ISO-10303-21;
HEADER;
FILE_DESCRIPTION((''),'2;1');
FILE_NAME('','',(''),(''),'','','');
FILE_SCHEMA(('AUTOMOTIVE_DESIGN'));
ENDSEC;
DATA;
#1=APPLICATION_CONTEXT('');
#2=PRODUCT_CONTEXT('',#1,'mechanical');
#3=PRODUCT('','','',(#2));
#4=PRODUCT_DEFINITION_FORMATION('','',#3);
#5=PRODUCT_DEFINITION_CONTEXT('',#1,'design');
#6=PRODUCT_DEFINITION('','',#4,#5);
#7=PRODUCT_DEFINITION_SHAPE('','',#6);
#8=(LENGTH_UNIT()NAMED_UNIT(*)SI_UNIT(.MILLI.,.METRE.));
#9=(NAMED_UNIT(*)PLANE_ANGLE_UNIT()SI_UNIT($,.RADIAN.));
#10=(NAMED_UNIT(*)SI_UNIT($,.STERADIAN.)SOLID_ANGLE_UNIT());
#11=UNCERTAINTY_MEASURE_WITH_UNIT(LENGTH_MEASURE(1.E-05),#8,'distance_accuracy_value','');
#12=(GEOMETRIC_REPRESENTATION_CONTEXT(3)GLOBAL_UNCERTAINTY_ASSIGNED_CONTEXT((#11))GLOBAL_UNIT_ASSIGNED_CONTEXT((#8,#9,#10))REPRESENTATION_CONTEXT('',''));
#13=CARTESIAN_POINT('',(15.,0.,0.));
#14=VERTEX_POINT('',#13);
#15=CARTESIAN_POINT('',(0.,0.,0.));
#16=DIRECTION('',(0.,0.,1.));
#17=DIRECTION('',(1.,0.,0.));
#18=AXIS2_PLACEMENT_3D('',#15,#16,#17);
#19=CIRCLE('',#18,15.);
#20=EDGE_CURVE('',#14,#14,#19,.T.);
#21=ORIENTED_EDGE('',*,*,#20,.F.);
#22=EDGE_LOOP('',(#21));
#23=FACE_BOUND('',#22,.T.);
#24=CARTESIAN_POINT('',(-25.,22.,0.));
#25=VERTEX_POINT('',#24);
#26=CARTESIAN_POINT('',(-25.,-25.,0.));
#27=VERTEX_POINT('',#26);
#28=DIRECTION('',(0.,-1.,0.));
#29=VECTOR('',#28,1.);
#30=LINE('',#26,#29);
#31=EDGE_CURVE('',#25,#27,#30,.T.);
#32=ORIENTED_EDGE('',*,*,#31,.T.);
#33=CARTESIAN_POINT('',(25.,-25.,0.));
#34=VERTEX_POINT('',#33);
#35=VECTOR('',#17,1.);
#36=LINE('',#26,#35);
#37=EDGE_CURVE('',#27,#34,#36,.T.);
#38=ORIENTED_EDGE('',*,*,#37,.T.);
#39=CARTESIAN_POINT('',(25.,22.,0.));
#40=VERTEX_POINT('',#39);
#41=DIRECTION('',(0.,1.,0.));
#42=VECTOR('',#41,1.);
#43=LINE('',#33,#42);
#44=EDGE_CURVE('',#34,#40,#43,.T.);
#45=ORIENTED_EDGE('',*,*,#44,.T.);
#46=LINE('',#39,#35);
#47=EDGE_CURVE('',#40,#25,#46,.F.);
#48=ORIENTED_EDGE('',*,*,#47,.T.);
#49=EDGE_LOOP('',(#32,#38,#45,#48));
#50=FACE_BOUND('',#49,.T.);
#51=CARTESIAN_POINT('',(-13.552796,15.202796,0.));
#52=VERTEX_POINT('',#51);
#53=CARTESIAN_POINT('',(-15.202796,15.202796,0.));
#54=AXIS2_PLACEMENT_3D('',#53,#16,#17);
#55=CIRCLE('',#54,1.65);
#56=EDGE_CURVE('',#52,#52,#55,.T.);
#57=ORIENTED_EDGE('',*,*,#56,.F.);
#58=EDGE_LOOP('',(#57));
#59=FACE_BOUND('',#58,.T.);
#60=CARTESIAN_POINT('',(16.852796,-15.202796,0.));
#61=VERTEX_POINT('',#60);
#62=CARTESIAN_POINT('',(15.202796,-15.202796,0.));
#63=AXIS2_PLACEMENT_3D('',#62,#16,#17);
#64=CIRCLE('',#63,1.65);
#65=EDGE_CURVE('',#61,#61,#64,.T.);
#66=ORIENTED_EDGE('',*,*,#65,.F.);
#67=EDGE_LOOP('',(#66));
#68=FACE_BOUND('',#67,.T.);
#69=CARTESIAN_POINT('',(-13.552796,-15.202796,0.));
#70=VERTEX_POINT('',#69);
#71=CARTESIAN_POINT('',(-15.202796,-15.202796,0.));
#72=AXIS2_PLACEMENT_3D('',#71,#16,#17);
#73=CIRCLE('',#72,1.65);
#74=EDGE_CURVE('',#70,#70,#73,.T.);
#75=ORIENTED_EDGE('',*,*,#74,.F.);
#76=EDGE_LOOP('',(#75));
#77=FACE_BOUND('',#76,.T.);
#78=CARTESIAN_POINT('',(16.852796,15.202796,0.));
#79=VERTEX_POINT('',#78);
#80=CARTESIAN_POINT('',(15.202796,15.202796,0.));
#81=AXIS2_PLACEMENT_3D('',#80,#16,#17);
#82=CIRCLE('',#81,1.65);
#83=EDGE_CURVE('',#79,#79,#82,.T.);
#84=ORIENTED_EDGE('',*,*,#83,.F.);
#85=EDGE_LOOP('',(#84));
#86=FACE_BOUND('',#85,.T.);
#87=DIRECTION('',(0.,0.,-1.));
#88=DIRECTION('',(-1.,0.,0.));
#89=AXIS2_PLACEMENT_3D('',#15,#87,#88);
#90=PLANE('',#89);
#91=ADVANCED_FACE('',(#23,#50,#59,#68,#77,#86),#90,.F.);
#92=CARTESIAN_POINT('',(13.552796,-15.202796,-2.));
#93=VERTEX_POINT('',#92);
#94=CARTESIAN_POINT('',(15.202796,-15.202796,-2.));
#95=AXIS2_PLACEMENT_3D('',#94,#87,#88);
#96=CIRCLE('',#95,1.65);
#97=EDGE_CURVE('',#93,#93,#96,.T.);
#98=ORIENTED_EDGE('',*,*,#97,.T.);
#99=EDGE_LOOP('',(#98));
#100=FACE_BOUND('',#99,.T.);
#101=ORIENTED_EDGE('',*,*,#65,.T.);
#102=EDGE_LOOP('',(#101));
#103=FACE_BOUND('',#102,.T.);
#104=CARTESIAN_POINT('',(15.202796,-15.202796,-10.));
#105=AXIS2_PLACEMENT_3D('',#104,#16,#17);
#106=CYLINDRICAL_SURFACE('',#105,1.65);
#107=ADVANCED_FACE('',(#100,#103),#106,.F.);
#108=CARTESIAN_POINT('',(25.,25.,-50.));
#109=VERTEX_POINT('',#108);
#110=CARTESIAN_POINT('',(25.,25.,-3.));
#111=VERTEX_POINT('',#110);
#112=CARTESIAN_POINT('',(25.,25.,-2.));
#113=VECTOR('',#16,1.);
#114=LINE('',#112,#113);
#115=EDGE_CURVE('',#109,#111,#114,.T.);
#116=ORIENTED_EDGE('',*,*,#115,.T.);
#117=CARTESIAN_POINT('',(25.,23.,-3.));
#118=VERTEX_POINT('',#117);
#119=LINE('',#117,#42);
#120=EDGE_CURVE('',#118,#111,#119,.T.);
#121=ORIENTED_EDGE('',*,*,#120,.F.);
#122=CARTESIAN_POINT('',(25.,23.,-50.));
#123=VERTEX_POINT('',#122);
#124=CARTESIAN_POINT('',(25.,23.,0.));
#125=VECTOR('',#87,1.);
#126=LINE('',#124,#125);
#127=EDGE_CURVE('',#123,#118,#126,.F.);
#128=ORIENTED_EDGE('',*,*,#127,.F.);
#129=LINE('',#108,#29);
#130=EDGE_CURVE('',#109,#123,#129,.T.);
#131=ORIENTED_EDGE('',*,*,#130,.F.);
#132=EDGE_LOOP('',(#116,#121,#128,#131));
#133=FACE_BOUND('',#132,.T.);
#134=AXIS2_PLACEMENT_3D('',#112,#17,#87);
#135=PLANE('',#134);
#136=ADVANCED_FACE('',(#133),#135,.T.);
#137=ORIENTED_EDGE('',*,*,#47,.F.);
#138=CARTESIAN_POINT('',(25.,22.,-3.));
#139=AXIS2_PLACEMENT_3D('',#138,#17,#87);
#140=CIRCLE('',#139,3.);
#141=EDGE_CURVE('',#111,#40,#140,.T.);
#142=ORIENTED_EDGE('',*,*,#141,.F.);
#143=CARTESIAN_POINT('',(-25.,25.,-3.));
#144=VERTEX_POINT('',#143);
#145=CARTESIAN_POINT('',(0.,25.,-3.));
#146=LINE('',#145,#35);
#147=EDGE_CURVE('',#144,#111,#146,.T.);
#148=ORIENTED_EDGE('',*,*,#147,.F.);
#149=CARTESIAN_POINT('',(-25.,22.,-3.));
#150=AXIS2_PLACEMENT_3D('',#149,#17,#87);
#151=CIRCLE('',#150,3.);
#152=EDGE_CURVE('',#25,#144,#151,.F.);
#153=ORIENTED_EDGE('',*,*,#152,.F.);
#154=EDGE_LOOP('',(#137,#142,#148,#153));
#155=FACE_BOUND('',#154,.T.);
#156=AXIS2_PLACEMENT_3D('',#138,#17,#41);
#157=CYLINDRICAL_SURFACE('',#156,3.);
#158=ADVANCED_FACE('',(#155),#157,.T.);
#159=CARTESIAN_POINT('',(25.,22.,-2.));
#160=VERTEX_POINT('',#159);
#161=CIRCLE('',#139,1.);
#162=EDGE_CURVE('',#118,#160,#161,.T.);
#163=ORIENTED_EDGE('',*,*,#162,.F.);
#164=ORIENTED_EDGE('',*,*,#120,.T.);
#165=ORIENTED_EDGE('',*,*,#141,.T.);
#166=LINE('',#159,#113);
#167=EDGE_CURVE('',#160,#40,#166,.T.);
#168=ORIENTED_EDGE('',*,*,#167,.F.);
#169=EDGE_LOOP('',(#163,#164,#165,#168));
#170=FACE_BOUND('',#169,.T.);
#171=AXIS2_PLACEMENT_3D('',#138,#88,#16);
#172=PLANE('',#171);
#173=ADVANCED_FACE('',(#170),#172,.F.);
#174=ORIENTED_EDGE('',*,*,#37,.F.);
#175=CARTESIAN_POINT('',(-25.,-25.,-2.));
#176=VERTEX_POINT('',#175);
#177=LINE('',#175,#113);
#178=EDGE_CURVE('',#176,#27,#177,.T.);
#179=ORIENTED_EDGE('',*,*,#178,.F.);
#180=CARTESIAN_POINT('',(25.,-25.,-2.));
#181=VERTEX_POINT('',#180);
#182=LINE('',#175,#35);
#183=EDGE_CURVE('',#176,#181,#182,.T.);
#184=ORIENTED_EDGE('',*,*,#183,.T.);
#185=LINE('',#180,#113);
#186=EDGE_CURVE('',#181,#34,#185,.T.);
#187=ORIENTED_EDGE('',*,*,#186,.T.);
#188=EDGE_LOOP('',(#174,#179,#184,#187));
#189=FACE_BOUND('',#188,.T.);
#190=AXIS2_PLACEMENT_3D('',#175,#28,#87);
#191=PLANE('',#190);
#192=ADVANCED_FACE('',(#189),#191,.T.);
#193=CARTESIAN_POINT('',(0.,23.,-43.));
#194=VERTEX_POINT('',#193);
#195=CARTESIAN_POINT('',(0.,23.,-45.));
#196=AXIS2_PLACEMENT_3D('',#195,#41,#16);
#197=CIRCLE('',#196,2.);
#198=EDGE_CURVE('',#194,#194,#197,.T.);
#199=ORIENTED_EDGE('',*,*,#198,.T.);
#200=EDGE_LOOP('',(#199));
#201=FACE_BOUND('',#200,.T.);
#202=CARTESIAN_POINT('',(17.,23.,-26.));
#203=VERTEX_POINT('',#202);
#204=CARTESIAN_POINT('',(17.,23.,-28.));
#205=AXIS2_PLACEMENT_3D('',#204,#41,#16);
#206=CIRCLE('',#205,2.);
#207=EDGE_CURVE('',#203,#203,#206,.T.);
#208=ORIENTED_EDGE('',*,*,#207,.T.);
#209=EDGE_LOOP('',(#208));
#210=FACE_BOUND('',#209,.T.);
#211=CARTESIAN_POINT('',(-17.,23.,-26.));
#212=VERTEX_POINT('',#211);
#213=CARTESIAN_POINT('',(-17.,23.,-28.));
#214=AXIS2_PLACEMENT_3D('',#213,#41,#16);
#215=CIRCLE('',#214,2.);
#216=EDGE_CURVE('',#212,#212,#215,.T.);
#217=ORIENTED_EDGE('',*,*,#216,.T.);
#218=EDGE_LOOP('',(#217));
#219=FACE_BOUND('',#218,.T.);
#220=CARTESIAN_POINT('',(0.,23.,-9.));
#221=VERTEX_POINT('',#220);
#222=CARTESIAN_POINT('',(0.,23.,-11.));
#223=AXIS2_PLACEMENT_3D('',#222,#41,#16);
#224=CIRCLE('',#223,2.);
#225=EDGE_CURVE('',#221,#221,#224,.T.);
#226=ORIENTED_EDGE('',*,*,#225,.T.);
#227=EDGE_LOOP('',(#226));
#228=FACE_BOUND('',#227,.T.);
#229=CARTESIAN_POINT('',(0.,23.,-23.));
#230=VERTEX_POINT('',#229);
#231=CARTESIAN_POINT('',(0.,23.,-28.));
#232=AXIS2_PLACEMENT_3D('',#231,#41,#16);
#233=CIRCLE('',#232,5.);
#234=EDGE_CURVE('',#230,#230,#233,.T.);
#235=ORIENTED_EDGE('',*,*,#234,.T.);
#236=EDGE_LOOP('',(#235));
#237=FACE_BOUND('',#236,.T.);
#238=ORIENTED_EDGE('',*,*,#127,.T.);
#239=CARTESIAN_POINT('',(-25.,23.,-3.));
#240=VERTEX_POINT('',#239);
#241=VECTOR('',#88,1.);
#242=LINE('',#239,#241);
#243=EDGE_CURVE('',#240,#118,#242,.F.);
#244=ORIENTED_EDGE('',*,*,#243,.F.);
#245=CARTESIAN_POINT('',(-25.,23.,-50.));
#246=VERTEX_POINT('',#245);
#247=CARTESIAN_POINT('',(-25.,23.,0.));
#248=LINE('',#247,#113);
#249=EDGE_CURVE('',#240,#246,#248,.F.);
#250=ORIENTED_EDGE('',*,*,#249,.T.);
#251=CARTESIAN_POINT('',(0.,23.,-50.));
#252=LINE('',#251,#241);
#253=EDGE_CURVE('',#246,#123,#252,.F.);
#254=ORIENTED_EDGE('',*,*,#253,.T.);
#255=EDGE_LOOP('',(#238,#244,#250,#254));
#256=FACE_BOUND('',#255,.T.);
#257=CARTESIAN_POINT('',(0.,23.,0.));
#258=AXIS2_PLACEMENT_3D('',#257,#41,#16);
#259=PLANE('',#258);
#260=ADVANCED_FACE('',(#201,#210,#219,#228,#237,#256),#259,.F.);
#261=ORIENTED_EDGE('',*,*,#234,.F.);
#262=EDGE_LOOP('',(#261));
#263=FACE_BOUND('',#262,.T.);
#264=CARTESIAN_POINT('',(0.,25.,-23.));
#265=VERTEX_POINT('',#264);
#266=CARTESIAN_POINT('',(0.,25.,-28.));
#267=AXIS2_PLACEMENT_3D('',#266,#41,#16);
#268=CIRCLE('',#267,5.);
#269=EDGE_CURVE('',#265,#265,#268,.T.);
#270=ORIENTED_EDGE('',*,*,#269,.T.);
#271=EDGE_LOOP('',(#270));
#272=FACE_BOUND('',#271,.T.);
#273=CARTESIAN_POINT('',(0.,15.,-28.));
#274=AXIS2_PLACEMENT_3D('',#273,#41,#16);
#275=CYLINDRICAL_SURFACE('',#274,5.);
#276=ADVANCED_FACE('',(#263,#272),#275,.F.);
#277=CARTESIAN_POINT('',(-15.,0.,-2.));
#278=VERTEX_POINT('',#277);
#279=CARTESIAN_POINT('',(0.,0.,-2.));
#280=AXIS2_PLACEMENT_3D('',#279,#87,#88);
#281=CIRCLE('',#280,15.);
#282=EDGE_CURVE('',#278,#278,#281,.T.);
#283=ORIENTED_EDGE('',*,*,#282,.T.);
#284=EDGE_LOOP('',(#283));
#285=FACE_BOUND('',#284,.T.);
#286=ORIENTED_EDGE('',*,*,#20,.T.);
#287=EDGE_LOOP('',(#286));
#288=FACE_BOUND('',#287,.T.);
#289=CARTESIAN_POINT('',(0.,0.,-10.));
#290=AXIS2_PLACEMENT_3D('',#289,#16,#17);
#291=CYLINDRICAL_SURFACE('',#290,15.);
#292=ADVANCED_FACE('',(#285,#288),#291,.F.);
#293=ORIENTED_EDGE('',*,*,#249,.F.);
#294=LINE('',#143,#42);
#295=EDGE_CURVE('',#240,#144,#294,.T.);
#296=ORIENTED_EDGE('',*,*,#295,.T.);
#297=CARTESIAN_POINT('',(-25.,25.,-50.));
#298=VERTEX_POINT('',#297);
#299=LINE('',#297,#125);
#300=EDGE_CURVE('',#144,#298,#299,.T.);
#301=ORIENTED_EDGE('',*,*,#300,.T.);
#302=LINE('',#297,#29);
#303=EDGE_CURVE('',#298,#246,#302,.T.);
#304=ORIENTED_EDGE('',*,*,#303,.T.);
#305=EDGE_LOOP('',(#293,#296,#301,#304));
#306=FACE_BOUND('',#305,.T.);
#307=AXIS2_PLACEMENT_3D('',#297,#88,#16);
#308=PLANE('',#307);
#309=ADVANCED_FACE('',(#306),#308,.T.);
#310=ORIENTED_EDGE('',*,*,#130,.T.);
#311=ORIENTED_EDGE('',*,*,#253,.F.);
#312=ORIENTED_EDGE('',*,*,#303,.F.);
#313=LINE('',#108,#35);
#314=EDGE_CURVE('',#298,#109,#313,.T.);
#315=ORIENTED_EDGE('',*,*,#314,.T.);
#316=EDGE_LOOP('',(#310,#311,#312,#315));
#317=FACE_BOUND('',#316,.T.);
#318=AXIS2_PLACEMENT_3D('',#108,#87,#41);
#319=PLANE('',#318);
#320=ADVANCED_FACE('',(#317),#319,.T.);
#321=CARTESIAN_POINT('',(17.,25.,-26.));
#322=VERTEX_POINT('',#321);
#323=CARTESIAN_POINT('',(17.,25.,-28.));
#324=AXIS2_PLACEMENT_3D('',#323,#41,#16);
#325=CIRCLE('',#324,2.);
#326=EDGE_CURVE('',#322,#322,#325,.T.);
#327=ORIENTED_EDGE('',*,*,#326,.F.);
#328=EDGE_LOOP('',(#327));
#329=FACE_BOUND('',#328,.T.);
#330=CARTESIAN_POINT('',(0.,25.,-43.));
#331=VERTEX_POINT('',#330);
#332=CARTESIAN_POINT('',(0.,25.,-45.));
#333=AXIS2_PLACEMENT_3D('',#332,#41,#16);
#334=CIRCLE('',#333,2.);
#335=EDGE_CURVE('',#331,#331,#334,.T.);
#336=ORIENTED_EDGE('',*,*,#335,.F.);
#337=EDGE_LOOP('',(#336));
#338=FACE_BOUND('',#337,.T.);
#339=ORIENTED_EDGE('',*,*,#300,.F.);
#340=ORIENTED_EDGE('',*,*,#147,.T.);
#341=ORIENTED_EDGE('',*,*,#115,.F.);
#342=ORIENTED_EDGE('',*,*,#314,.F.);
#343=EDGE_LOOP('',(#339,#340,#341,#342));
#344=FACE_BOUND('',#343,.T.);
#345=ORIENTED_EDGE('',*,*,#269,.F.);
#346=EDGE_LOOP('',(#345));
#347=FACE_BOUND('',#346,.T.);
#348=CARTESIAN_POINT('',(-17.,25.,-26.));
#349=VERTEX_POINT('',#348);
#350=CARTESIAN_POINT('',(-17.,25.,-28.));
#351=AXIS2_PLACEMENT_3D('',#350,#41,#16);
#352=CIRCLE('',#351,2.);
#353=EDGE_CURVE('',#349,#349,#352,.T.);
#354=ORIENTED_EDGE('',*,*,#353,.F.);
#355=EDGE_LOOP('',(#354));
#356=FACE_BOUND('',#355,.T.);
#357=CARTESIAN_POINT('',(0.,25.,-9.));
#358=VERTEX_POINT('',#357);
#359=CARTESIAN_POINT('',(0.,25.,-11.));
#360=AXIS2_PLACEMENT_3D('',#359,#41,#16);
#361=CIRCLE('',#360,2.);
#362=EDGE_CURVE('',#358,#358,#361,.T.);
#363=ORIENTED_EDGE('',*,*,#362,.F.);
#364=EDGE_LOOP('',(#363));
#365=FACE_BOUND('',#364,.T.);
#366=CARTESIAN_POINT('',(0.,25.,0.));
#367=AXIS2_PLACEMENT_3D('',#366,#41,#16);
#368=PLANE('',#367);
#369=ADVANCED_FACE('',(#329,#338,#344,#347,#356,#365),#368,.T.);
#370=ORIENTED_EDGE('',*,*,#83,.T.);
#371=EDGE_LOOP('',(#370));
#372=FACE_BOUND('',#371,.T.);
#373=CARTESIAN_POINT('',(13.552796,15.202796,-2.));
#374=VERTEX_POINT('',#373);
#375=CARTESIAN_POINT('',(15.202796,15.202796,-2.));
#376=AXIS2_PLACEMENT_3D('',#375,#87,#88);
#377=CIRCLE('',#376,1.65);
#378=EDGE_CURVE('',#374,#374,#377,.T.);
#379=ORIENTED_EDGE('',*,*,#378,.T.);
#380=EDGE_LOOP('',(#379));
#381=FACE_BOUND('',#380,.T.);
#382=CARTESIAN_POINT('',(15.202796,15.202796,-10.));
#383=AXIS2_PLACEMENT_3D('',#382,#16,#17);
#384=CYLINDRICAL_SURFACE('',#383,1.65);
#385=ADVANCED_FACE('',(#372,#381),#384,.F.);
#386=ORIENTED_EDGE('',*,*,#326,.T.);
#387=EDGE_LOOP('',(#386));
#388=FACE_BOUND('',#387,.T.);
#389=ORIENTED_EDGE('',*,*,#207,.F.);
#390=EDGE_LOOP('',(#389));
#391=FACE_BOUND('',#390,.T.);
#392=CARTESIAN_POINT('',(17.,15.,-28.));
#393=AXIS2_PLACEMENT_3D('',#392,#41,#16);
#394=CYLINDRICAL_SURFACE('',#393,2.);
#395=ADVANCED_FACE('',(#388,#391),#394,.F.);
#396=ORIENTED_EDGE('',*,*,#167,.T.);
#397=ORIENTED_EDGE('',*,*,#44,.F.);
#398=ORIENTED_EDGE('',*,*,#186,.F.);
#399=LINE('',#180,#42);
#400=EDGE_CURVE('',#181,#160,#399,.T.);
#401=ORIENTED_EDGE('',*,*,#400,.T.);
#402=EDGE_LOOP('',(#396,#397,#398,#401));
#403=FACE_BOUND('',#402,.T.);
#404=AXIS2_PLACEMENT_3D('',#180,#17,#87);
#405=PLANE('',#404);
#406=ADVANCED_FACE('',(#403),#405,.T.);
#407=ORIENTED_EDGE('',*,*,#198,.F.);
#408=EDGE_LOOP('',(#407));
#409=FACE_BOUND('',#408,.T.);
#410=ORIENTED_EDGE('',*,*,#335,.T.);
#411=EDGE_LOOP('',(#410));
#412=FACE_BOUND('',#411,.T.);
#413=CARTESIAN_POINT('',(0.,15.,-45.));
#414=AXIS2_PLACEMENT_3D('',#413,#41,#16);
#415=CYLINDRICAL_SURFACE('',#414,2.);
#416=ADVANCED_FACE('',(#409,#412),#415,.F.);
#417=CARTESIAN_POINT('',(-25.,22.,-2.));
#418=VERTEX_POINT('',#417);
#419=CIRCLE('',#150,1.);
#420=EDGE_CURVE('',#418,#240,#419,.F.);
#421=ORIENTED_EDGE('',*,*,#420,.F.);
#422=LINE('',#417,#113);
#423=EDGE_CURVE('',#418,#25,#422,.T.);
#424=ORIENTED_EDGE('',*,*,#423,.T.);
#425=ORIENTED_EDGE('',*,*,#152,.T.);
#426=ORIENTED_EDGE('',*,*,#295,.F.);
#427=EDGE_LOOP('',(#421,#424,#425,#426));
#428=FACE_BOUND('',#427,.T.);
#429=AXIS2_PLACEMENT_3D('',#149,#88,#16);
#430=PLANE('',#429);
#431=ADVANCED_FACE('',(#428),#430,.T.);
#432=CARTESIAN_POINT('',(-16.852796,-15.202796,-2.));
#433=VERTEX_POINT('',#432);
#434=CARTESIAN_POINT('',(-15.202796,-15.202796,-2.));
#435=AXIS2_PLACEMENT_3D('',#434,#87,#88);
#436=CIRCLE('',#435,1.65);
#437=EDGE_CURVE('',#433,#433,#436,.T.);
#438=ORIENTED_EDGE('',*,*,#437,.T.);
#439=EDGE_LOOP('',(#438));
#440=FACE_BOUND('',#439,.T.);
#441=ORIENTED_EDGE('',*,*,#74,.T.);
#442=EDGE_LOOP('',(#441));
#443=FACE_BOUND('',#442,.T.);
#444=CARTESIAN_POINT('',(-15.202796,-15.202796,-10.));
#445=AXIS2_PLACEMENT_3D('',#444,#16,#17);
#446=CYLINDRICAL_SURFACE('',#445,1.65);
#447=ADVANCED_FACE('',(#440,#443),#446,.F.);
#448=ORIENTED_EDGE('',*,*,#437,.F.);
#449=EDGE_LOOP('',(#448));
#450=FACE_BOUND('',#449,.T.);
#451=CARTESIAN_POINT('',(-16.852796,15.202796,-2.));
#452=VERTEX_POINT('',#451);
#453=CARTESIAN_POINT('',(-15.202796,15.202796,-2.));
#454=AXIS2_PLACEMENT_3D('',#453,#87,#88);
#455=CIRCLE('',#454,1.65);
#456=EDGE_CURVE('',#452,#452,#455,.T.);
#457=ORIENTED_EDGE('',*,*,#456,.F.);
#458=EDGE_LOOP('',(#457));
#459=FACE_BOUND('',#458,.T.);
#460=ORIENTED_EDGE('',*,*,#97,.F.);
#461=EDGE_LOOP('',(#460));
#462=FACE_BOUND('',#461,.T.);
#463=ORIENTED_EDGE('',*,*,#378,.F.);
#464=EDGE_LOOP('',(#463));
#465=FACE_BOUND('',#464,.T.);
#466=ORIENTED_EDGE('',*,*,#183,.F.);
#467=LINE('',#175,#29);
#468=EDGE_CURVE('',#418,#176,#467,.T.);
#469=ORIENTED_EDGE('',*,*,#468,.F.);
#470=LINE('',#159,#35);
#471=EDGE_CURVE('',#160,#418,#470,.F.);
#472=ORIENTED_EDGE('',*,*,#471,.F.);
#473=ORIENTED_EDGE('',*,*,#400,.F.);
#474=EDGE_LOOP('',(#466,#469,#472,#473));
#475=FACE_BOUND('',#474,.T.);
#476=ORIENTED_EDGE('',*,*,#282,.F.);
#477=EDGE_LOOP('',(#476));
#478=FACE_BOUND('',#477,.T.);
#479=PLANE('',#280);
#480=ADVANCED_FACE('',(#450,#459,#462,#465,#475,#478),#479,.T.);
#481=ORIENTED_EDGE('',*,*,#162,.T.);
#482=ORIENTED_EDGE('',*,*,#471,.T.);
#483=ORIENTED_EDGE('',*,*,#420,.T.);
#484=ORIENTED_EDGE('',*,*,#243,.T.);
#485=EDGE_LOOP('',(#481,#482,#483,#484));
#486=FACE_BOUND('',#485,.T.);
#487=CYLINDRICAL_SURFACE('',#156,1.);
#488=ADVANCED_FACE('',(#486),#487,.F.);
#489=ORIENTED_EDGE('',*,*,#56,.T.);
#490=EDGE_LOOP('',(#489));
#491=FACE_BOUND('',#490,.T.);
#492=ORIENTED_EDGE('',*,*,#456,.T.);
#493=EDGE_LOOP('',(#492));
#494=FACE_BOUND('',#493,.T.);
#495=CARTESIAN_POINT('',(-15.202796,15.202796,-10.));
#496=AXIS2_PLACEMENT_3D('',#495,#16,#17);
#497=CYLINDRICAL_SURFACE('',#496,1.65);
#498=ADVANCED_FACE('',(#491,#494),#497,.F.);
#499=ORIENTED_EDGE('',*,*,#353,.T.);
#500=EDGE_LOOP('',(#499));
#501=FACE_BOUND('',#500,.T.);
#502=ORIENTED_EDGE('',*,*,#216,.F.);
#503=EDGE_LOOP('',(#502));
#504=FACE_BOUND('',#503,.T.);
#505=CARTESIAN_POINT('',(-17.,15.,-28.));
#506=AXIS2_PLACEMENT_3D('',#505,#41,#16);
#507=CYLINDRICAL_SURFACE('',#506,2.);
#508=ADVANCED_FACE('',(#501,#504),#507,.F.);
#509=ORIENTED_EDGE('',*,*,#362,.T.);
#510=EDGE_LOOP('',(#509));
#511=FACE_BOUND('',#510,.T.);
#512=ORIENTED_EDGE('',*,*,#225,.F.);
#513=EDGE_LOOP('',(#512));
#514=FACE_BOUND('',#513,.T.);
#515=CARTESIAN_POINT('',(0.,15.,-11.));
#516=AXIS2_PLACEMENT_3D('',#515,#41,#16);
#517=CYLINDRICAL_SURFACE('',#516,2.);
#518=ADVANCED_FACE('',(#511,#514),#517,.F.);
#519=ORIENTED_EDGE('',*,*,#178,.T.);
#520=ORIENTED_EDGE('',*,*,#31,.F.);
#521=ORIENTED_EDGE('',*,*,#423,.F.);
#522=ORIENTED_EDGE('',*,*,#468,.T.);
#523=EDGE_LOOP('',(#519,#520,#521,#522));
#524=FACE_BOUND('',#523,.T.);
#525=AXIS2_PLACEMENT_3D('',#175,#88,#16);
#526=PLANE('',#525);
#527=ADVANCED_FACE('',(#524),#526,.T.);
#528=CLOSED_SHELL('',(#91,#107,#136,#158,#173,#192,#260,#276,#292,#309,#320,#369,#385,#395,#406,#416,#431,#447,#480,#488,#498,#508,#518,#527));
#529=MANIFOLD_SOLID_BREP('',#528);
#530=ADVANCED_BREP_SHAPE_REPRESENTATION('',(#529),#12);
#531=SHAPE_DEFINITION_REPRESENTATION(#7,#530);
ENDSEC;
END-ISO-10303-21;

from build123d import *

# Parameters (mm, degrees)
SKETCH_1_W                       = 50
SKETCH_1_H                       = 50
SM_BASE_FLANGE_1_DEPTH           = 2
SM_EDGE_FLANGE_1_STRIP_W         = 10
SM_EDGE_FLANGE_1_STRIP_H         = 2
SM_EDGE_FLANGE_1_STRIP_CUT_DEPTH = 50
SM_EDGE_FLANGE_1_DEPTH           = 50
SKETCH_9_R                       = 15
SKETCH_9_R_2                     = 1.65
CUT_EXTRUDE_2_DEPTH              = 10
SKETCH_12_R                      = 5
SKETCH_12_R_2                    = 2
CUT_EXTRUDE_4_DEPTH              = 10


# Sheet-metal steps are written as plain solids
with BuildPart() as part:
    # Sketch 1 → 基体-法兰1 (new body)
    with BuildSketch(Plane.XY):
        Rectangle(SKETCH_1_W, SKETCH_1_H)
    extrude(amount=-SM_BASE_FLANGE_1_DEPTH)

    # 边线-法兰1 strip (across the edge) → 边线-法兰1 strip cut (cut)
    with BuildSketch(Plane(origin=(-25, 25, -2), x_dir=(0, -1, 0), z_dir=(1, 0, 0))):
        with Locations((-2, -1)):
            Rectangle(SM_EDGE_FLANGE_1_STRIP_W, SM_EDGE_FLANGE_1_STRIP_H)
    extrude(amount=SM_EDGE_FLANGE_1_STRIP_CUT_DEPTH, mode=Mode.SUBTRACT)

    # 边线-法兰1 section (across the edge) → 边线-法兰1 (add)
    with BuildSketch(Plane(origin=(-25, 25, -2), x_dir=(0, -1, 0), z_dir=(1, 0, 0))):
        with BuildLine():
            Line((0, 1), (0, 48))
            Line((0, 48), (2, 48))
            Line((2, 48), (2, 1))
            ThreePointArc((2, 1), (2.292893219, 0.292893219), (3, 0))
            Line((3, 0), (3, -2))
            ThreePointArc((3, -2), (0.878679656, -1.121320344), (0, 1))
        make_face()
    extrude(amount=SM_EDGE_FLANGE_1_DEPTH)

    # 草图9 → 切除-拉伸2 (cut)
    with BuildSketch(Plane.XY):
        Circle(SKETCH_9_R)
        with Locations((-15.202795796, 15.202795796)):
            Circle(SKETCH_9_R_2)
        with Locations((15.202795796, 15.202795796)):
            Circle(SKETCH_9_R_2)
        with Locations((15.202795796, -15.202795796)):
            Circle(SKETCH_9_R_2)
        with Locations((-15.202795796, -15.202795796)):
            Circle(SKETCH_9_R_2)
    extrude(amount=-CUT_EXTRUDE_2_DEPTH, mode=Mode.SUBTRACT)

    # 草图12 → 切除-拉伸4 (cut)
    with BuildSketch(Plane(origin=(0, 25, 0), x_dir=(1, 0, 0), z_dir=(0, 1, 0))):
        with Locations(Location((0, 28, 0), (0, 0, 270))):
            Circle(SKETCH_12_R)
        with Locations(Location((0, 45, 0), (0, 0, 270))):
            Circle(SKETCH_12_R_2)
        with Locations(Location((17, 28, 0), (0, 0, 270))):
            Circle(SKETCH_12_R_2)
        with Locations(Location((0, 11, 0), (0, 0, 270))):
            Circle(SKETCH_12_R_2)
        with Locations(Location((-17, 28, 0), (0, 0, 270))):
            Circle(SKETCH_12_R_2)
    extrude(amount=-CUT_EXTRUDE_4_DEPTH, mode=Mode.SUBTRACT)


solid = part.part
